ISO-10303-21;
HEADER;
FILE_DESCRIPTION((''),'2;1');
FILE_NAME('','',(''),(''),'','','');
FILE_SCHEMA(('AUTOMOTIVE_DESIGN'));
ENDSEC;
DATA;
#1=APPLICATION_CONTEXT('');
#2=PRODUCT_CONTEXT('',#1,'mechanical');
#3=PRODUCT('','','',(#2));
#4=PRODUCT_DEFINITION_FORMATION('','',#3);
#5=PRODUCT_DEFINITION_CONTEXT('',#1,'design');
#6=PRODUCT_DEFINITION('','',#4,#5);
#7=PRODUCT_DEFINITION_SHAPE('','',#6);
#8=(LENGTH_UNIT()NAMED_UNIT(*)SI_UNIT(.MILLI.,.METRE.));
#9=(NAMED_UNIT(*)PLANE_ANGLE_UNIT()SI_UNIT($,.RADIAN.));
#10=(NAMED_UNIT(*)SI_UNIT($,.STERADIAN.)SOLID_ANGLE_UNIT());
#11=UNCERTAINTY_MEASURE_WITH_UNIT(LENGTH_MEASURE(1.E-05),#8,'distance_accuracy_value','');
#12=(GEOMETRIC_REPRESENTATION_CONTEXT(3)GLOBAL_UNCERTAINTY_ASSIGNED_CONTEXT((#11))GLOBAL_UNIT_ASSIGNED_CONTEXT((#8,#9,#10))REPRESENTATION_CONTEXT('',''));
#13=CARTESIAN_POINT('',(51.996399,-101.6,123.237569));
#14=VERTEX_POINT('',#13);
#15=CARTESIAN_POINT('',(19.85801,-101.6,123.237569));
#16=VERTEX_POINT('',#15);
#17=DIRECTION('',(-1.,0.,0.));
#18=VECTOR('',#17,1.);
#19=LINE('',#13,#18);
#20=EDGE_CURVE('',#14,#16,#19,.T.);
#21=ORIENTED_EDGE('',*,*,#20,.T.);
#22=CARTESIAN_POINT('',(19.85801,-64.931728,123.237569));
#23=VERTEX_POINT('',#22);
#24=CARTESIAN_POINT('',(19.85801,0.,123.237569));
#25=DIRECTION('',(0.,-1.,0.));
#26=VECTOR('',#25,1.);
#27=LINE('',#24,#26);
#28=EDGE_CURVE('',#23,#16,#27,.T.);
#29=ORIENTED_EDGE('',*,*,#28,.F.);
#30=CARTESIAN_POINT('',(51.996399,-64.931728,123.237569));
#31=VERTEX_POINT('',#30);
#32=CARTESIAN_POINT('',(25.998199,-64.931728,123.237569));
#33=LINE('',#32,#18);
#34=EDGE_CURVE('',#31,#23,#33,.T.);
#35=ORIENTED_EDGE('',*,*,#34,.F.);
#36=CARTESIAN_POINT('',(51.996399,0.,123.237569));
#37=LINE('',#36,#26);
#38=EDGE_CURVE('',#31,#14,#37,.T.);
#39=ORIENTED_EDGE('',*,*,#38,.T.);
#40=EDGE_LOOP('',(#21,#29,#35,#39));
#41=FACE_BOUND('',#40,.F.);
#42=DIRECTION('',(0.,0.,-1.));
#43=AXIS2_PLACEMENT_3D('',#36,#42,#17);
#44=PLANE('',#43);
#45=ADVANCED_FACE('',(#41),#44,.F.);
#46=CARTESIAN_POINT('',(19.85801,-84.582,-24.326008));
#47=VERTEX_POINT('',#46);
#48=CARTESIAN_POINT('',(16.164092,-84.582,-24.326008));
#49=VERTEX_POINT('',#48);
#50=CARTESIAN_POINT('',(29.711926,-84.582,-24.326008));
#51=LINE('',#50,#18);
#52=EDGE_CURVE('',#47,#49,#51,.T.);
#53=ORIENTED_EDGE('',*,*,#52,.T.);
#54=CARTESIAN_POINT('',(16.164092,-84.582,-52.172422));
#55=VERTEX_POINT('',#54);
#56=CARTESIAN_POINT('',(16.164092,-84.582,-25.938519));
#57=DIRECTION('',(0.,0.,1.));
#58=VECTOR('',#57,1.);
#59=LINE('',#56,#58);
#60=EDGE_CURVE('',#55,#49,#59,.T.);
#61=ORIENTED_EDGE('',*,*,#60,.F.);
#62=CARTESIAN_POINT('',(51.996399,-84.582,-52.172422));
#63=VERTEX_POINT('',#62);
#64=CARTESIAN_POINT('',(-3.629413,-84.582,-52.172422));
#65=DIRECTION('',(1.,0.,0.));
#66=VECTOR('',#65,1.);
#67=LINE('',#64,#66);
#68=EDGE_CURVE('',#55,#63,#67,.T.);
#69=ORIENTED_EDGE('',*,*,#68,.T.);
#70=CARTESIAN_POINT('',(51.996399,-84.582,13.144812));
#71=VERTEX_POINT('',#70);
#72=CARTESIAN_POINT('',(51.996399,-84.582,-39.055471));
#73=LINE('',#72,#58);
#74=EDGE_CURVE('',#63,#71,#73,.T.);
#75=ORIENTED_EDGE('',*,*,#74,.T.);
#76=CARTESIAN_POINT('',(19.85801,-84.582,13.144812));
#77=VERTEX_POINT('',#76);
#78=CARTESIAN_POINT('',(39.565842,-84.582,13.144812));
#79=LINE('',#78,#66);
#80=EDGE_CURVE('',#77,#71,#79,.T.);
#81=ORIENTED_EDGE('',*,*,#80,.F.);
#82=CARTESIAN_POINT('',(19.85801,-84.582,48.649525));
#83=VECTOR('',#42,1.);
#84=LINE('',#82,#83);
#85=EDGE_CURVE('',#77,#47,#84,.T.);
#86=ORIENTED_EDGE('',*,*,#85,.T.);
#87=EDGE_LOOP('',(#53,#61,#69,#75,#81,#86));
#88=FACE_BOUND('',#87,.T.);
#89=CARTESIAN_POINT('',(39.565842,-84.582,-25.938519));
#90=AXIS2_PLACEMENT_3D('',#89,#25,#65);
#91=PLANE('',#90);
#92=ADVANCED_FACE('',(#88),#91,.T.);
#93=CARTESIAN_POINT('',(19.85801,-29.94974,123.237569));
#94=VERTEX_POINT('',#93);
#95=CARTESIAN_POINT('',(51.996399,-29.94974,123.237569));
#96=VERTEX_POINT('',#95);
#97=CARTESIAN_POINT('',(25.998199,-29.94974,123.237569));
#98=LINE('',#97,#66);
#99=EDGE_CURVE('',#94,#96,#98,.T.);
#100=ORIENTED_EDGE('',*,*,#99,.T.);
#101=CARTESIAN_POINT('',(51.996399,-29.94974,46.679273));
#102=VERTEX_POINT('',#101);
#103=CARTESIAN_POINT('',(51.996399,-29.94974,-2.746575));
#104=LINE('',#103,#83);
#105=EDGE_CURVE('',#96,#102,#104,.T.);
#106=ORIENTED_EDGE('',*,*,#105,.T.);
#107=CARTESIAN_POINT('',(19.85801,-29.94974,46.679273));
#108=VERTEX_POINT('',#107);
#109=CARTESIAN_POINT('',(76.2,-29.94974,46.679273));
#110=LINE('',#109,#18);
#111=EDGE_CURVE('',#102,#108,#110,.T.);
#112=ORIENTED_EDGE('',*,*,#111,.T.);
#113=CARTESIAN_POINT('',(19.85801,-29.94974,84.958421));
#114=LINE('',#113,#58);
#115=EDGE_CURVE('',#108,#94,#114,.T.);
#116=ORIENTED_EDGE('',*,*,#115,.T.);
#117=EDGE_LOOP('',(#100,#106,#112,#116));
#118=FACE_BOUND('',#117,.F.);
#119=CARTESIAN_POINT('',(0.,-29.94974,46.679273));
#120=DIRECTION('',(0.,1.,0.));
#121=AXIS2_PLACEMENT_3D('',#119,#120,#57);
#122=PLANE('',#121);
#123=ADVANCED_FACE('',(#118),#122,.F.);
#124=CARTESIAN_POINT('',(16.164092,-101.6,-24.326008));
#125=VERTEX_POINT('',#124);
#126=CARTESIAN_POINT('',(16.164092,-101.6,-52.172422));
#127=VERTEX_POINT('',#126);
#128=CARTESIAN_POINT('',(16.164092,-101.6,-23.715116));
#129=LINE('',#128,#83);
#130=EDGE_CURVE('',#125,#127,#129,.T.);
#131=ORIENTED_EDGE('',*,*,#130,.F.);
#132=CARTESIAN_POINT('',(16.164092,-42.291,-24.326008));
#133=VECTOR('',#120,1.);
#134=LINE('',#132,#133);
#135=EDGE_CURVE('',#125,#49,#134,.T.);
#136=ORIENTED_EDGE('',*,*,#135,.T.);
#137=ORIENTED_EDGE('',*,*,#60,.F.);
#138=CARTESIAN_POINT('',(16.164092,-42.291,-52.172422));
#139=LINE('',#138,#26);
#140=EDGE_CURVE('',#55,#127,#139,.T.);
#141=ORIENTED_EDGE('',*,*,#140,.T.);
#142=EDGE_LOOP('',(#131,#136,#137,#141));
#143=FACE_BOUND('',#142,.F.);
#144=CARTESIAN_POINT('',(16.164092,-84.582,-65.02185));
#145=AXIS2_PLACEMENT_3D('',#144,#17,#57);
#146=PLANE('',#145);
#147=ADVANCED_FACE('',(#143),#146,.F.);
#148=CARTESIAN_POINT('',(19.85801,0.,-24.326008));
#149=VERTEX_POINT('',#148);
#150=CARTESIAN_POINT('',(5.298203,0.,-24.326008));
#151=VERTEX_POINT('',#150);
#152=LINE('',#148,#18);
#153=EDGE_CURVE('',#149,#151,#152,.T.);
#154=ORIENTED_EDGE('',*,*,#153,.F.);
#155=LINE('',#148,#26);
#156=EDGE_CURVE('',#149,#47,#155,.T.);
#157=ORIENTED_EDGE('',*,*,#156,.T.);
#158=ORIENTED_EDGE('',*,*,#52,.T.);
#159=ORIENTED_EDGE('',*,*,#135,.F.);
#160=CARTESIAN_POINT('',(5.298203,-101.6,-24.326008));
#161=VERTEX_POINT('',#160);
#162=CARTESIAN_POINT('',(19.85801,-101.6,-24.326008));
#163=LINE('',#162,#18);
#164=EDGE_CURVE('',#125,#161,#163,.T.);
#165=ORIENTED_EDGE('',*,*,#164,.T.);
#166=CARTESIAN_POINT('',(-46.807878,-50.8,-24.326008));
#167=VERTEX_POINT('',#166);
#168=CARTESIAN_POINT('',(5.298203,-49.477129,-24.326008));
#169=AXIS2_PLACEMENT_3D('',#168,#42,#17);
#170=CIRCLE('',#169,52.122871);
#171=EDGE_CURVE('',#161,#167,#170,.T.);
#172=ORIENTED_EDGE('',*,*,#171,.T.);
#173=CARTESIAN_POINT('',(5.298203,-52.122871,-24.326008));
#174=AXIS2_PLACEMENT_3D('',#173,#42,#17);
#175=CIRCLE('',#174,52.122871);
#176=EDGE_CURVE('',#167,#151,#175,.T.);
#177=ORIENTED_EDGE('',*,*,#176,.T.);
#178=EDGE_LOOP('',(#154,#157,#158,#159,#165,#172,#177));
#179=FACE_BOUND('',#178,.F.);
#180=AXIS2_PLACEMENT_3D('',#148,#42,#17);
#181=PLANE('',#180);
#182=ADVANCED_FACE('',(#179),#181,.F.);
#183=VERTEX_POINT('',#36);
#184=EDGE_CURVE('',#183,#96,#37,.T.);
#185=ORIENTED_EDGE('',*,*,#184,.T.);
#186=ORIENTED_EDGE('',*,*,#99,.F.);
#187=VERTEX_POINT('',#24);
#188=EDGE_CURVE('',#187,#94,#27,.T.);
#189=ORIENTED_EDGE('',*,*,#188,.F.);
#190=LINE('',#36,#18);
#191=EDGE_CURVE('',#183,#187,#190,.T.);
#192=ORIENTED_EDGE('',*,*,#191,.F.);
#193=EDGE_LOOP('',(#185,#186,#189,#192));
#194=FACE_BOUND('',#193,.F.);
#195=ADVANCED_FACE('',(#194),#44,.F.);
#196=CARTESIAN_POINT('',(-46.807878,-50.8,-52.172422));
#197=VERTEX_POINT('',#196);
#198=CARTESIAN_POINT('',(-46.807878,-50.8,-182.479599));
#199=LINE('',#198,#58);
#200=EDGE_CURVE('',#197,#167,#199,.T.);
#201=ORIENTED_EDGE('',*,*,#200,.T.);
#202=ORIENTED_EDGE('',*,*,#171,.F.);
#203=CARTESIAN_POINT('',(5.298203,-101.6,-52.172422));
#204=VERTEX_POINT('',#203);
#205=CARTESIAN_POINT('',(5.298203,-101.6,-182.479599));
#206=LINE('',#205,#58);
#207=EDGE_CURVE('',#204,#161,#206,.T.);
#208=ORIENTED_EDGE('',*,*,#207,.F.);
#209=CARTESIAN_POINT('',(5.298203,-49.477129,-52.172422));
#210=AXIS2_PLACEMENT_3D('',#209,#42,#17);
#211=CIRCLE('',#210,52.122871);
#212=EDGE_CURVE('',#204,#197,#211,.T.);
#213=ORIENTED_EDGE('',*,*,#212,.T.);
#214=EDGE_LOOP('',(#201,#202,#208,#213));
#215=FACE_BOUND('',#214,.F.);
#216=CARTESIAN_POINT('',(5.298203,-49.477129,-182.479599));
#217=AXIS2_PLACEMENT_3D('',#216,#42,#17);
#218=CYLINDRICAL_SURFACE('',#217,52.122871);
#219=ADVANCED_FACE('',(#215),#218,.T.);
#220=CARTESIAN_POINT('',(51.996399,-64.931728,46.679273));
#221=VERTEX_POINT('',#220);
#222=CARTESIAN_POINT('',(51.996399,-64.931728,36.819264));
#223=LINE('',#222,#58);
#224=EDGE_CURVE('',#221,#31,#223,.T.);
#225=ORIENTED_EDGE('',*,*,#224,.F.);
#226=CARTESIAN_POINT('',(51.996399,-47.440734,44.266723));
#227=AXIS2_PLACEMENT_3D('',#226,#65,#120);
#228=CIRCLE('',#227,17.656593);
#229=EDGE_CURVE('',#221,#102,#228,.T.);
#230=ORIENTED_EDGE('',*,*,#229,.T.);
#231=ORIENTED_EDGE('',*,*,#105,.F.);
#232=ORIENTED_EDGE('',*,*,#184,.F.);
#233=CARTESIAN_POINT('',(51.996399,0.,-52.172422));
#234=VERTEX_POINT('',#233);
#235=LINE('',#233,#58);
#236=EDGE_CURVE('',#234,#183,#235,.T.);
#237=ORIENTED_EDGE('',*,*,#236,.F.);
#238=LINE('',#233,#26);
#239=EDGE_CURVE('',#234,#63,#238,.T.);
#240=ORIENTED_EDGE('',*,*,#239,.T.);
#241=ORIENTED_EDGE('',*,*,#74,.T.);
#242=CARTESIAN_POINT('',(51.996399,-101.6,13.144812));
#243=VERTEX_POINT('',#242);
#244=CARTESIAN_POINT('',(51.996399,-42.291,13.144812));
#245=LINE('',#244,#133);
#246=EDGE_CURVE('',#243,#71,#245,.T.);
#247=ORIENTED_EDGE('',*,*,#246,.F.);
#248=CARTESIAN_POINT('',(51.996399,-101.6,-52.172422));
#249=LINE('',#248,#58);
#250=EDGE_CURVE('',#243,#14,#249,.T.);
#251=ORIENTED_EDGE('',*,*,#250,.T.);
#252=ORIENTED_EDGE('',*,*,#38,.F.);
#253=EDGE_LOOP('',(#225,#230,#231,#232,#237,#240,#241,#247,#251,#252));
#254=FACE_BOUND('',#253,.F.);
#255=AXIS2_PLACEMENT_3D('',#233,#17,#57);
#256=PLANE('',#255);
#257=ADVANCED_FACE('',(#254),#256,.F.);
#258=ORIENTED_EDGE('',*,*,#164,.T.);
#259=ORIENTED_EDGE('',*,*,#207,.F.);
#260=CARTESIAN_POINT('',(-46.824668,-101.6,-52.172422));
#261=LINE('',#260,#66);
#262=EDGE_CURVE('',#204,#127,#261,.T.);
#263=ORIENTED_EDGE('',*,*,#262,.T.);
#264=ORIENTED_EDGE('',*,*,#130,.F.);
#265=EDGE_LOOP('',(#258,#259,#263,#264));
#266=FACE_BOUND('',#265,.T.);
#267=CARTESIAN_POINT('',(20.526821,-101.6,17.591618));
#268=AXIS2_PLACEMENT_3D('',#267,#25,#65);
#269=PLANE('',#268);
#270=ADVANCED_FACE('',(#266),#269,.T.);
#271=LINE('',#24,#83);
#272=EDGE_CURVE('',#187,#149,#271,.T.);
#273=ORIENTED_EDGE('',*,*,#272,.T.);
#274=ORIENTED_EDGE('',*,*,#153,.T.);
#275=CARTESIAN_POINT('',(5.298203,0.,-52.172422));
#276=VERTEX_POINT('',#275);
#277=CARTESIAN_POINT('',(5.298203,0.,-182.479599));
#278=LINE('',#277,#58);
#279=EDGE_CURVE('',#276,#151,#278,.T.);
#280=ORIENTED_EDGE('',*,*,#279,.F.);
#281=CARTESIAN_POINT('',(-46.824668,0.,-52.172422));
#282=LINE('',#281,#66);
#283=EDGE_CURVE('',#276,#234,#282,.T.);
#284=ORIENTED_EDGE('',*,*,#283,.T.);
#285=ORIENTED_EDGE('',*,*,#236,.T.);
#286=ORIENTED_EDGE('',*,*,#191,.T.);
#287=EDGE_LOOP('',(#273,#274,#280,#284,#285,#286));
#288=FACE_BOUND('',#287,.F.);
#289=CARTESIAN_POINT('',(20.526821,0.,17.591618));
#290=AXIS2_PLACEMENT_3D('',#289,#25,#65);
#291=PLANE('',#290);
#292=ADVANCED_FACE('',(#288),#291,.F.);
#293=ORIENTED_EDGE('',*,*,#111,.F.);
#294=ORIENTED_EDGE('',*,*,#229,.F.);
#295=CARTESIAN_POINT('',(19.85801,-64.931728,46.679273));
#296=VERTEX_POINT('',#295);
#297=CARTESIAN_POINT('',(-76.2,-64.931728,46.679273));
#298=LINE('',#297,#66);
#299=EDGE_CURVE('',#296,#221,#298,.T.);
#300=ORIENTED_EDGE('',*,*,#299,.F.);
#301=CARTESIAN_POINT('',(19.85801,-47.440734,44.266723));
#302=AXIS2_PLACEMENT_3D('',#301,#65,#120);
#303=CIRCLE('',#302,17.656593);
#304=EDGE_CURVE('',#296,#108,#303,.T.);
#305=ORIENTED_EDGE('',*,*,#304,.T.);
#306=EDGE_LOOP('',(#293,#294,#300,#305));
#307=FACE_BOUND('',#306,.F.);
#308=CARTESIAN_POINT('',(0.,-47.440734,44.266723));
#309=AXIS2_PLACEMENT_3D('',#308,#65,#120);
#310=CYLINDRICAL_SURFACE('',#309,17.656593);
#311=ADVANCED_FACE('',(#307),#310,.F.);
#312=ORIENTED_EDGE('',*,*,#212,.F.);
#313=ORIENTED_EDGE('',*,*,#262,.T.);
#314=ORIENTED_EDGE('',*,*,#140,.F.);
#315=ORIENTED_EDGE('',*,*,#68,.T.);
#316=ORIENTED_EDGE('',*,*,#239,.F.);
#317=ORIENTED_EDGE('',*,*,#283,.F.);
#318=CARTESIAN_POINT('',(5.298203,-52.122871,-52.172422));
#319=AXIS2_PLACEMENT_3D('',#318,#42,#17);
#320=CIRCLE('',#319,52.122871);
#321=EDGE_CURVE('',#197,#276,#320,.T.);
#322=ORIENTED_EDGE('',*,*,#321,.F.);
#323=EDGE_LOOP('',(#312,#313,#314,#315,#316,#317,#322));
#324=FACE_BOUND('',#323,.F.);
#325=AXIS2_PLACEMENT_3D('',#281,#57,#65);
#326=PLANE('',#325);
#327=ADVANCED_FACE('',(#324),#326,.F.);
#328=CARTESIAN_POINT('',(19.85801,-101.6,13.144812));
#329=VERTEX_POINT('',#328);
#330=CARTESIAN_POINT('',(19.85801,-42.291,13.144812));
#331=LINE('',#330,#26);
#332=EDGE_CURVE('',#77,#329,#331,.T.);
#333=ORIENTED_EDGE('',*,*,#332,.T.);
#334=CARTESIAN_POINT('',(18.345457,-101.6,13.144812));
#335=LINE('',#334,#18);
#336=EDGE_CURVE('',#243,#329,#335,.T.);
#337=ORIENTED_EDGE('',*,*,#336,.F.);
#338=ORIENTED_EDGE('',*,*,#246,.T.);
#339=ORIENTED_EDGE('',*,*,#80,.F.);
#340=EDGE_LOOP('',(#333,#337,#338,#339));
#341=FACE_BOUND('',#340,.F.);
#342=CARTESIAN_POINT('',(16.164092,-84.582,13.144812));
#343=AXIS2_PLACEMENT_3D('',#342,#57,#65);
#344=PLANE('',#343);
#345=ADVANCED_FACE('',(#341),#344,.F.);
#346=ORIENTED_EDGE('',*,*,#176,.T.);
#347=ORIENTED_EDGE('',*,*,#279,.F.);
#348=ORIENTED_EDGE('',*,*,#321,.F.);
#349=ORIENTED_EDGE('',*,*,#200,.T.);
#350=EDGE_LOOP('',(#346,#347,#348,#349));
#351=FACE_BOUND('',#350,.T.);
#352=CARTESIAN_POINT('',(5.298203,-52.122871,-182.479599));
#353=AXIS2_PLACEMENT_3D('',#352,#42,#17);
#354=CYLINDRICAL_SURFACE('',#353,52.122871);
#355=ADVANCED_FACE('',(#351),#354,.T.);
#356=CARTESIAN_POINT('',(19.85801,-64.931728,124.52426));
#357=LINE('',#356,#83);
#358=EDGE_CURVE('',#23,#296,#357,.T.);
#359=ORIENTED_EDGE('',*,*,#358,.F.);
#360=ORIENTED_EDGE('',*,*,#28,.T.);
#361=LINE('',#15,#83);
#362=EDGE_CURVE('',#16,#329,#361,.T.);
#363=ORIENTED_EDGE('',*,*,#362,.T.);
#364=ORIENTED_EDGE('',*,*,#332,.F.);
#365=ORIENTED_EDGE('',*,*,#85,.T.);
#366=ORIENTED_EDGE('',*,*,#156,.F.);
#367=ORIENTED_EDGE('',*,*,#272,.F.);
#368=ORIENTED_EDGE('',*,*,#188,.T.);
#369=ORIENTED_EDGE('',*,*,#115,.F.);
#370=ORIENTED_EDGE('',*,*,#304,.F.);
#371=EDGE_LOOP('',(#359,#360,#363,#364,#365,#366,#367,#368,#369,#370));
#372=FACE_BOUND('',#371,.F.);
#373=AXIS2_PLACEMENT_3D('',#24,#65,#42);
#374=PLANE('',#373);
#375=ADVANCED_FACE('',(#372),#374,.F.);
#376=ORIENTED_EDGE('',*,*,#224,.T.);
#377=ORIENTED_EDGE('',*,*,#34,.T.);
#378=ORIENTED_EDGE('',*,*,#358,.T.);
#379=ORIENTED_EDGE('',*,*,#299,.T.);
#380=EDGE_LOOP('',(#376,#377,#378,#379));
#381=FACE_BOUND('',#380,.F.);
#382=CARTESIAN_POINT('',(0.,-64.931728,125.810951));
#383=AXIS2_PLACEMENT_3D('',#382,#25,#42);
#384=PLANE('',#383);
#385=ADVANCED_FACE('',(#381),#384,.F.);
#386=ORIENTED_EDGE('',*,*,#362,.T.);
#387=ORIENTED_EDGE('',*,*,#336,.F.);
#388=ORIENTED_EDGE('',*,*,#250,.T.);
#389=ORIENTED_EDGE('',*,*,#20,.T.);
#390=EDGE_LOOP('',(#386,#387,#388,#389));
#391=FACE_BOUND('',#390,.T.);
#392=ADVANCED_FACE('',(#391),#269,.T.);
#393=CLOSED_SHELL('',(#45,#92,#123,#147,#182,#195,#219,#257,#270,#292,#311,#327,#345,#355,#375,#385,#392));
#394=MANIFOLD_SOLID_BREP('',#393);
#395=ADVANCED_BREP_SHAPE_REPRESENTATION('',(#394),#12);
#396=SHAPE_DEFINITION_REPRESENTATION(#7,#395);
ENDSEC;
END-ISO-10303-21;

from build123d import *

# Parameters (mm, degrees)
F1_DEPTH    = 101.6
F2_T1_DEPTH = 288.460768654
F4_START    = 84.582
F3_W        = 46.8034986407
F3_H        = 78.1666617841
F4_DEPTH    = 39.37
F6_DEPTH    = 76.2


# Not quite as in the source:
# - a fillet or chamfer that OpenCascade refuses, or shapes differently, is made with other operations: its cross-section is extruded or revolved along the edge and cut away or added


with BuildPart() as f1:
    # F0 (on Front) → F1 (new body)
    with BuildSketch(Plane.XZ):
        Polygon((-46.8246676028, -52.1724224091), (51.9963987172, -52.1724224091), (51.9963987172, 123.2375688851), (19.8580101132, 123.2375688851), (19.8580101132, -24.3260078132), (-46.8246676028, -24.3260078132), align=None)
    extrude(amount=F1_DEPTH)

    # F2: fillet of radius 52.1228708116 on 2 edges, made by hand

    # F2_s2 → F2_t1 (cut)
    with BuildSketch(Plane.XY.offset(-182.4795994381)):
        with BuildLine():
            ThreePointArc((-46.8246676028, -52.1228708116), (-31.558232197, -15.2664354058), (5.2982032089, 0))
            Line((5.2982032089, 0), (-46.8246676028, 0))
            Line((-46.8246676028, 0), (-46.8246676028, -52.1228708116))
        make_face()
        with BuildLine():
            ThreePointArc((-46.8246676028, -49.4771291884), (-31.558232197, -86.3335645942), (5.2982032089, -101.6))
            Line((5.2982032089, -101.6), (-46.8246676028, -101.6))
            Line((-46.8246676028, -101.6), (-46.8246676028, -49.4771291884))
        make_face()
    extrude(amount=F2_T1_DEPTH, mode=Mode.SUBTRACT)

    # F3 (on Front) → F4 (cut)
    with BuildSketch(Plane.XZ.offset(F4_START)):
        with Locations((39.5658416674, -25.9385192767)):
            Rectangle(F3_W, F3_H)
    extrude(amount=F4_DEPTH, mode=Mode.SUBTRACT)

    # F5 (on Right) → F6 (cut, symmetric)
    with BuildSketch(Plane.YZ):
        with BuildLine():
            Line((-29.9497395754, 125.8109509945), (-64.9317279458, 125.8109509945))
            Line((-64.9317279458, 125.8109509945), (-64.9317279458, 46.6792732477))
            ThreePointArc((-64.9317279458, 46.6792732477), (-47.4407337606, 61.9233160809), (-29.9497395754, 46.6792732477))
            Line((-29.9497395754, 46.6792732477), (-29.9497395754, 125.8109509945))
        make_face()
        with BuildLine():
            ThreePointArc((-29.9497395754, 46.6792732477), (-47.4407337606, 61.9233160809), (-64.9317279458, 46.6792732477))
            ThreePointArc((-64.9317279458, 46.6792732477), (-48.6498471956, 26.6515784611), (-29.7841407761, 44.2667230964))
            ThreePointArc((-29.7841407761, 44.2667230964), (-29.8255891253, 45.4758365314), (-29.9497395754, 46.6792732477))
        make_face()
    extrude(amount=F6_DEPTH, both=True, mode=Mode.SUBTRACT)


solid = f1.part
